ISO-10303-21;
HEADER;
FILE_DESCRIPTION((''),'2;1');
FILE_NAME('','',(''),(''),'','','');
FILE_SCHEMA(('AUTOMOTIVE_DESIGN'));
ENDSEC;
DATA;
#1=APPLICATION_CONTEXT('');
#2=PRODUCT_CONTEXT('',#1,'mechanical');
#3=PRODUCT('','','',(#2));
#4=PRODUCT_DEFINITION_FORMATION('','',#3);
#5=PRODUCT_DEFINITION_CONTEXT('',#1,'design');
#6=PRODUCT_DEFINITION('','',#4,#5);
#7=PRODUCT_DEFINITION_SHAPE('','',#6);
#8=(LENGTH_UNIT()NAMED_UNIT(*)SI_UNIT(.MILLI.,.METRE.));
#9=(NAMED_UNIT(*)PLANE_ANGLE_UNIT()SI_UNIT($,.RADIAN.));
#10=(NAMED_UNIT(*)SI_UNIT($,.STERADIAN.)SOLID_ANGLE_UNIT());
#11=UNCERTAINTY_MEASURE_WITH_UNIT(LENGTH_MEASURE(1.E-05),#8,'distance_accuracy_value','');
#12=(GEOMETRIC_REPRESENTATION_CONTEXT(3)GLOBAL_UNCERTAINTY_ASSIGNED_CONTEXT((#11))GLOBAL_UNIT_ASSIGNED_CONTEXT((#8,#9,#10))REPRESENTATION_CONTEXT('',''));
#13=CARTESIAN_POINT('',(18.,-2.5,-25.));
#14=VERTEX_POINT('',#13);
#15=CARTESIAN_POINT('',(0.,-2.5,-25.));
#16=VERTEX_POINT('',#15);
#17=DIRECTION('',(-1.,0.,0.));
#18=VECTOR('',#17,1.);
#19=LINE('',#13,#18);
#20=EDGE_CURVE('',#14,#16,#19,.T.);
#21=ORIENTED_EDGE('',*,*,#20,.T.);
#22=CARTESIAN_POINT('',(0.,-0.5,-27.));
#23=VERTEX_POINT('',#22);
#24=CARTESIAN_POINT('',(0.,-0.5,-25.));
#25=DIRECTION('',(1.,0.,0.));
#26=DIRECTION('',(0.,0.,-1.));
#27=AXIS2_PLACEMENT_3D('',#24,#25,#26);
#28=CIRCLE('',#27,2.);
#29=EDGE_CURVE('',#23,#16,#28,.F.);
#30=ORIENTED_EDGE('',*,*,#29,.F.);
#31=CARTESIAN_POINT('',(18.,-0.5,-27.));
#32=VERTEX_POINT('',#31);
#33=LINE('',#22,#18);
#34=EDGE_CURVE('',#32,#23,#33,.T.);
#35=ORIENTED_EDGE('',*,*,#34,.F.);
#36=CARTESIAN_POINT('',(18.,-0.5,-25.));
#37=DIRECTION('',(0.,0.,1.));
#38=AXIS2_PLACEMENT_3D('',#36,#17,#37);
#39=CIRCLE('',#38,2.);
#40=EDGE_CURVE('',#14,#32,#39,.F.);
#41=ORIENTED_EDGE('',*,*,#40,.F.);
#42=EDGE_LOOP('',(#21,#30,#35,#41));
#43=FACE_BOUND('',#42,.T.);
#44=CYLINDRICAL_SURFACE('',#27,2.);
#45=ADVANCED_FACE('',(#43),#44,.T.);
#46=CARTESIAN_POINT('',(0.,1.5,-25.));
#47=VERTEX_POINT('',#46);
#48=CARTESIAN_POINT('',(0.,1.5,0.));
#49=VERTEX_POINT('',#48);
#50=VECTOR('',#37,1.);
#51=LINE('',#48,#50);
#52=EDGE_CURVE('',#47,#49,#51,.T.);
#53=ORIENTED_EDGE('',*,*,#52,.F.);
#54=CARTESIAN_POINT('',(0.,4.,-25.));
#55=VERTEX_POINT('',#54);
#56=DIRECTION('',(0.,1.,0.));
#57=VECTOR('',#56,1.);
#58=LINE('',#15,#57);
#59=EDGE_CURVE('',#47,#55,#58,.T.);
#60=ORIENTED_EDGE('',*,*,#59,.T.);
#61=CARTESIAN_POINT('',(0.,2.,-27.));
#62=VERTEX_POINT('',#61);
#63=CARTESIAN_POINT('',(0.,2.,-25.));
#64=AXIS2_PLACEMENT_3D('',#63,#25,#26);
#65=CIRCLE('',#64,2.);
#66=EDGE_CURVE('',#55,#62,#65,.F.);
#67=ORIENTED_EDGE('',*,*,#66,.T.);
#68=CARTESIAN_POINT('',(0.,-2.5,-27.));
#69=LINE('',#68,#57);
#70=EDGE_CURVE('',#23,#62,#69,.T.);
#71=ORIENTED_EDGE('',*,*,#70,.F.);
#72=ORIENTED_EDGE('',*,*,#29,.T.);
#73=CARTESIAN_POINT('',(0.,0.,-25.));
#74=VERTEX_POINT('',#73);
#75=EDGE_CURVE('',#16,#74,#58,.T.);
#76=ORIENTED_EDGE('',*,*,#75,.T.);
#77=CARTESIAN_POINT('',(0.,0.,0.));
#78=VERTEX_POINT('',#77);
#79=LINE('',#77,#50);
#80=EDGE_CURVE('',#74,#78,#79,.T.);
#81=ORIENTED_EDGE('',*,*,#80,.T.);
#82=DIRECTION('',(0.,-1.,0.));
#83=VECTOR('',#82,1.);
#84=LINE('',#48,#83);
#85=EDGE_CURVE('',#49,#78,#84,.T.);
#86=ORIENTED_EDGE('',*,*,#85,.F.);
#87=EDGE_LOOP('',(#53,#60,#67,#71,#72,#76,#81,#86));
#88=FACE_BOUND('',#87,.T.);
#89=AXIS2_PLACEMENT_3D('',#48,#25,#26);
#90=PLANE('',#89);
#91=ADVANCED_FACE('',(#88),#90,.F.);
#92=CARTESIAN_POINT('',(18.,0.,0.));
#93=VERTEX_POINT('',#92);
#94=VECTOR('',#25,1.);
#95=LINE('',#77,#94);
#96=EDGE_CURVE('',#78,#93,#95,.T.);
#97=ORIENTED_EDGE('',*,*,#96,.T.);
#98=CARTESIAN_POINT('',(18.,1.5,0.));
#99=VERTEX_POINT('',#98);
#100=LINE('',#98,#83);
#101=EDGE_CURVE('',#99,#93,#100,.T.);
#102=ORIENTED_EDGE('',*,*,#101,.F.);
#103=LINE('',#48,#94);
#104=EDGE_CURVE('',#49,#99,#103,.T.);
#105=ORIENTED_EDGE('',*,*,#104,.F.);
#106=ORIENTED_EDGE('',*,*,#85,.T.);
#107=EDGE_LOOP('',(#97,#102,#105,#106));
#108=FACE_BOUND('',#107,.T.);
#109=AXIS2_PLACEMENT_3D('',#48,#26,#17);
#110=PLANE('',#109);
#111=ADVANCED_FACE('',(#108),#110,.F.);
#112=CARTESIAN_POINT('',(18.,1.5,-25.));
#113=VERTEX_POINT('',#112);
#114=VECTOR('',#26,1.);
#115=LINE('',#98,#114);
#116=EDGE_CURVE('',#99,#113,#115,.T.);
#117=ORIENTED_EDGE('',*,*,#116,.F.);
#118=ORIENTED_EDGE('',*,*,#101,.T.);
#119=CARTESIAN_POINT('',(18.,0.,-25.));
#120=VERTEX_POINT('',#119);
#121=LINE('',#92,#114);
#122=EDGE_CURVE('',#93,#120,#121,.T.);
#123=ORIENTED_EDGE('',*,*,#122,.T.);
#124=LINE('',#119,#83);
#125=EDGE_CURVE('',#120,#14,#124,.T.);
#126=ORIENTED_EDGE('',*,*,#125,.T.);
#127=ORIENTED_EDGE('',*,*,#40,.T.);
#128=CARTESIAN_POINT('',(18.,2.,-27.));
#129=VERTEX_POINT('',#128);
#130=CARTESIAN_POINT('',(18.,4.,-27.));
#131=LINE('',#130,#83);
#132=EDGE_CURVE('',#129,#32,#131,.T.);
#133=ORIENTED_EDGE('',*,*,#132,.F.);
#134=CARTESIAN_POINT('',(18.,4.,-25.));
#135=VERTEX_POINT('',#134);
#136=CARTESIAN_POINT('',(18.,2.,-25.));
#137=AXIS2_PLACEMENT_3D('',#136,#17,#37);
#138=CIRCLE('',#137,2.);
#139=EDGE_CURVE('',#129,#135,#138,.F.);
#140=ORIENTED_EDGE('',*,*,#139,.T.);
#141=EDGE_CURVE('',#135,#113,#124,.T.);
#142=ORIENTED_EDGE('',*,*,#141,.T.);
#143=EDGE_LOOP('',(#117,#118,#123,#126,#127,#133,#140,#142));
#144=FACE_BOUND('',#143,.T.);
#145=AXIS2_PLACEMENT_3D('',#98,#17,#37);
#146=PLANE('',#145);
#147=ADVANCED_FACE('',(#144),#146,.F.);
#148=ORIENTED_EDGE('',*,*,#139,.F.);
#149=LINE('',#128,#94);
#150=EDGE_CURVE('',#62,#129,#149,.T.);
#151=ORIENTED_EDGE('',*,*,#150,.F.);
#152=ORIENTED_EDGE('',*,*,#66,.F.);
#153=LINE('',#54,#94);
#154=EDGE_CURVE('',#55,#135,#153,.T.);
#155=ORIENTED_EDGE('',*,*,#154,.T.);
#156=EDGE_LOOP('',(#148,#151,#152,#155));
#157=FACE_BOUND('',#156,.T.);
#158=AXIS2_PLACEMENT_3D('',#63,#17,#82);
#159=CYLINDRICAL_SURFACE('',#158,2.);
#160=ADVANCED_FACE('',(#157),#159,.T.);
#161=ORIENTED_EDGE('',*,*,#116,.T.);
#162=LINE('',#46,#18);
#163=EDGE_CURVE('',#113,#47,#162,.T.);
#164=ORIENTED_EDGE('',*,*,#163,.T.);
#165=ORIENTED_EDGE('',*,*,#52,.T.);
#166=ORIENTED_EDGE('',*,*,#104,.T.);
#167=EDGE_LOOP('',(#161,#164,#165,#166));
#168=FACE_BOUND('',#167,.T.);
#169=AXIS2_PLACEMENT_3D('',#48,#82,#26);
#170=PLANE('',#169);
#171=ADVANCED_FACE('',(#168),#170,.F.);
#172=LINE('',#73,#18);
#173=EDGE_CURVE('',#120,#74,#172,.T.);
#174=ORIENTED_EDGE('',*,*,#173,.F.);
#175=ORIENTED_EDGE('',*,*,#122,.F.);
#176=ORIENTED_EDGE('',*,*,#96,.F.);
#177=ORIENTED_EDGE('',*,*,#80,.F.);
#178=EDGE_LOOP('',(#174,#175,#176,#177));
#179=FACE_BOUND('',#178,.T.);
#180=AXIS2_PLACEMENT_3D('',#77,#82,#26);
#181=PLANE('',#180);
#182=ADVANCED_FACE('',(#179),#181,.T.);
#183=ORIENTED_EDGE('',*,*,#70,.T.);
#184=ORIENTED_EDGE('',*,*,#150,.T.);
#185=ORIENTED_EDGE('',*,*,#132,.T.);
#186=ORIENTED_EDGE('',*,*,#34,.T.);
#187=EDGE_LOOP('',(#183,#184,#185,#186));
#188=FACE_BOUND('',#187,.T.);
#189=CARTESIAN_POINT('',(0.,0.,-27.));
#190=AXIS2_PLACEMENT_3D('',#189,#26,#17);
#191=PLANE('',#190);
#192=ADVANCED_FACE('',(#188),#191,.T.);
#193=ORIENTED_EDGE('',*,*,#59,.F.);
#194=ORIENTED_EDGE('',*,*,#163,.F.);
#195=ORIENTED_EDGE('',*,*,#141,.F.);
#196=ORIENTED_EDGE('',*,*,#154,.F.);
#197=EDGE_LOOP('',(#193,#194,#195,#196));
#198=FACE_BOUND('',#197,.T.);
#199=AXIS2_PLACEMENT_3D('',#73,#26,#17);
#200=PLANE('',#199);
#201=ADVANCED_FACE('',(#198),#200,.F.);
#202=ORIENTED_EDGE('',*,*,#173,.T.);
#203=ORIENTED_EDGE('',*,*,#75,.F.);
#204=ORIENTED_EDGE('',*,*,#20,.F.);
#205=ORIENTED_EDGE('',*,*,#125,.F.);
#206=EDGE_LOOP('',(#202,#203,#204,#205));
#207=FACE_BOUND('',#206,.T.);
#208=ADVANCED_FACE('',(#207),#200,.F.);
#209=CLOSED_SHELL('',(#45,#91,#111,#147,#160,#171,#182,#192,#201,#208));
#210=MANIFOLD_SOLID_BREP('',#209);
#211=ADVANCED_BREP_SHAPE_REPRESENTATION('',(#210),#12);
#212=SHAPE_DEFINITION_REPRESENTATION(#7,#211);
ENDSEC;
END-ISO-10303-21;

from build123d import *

# Parameters (mm, degrees)
SKETCH1_W           = 18
SKETCH1_H           = 25
BOSS_EXTRUDE1_DEPTH = 1.5
BOSS_EXTRUDE2_DEPTH = 2
FILLET1_R           = 2


with BuildPart() as part:
    # Sketch1 → Boss-Extrude1 (new body)
    with BuildSketch(Plane(origin=(0, 0, 0), x_dir=(1, 0, 0), z_dir=(0, 1, 0))):
        with Locations((9, 12.5)):
            Rectangle(SKETCH1_W, SKETCH1_H)
    extrude(amount=BOSS_EXTRUDE1_DEPTH)

    # Sketch2 → Boss-Extrude2 (add)
    with BuildSketch(Plane(origin=(0, 0, -25), x_dir=(-1, 0, 0), z_dir=(0, 0, -1))):
        Polygon((-18, 0), (-18, -2.5), (0, -2.5), (0, 4), (-18, 4), align=None)
    extrude(amount=BOSS_EXTRUDE2_DEPTH)

    # Fillet1
    fillet1_edges = [part.edges().sort_by_distance(p)[0] for p in [
        (9, 4, -27),
        (9, -2.5, -27),
    ]]
    fillet(fillet1_edges, radius=FILLET1_R - 0.0001)  # a hair under: the kernel refuses the full size


solid = part.part
